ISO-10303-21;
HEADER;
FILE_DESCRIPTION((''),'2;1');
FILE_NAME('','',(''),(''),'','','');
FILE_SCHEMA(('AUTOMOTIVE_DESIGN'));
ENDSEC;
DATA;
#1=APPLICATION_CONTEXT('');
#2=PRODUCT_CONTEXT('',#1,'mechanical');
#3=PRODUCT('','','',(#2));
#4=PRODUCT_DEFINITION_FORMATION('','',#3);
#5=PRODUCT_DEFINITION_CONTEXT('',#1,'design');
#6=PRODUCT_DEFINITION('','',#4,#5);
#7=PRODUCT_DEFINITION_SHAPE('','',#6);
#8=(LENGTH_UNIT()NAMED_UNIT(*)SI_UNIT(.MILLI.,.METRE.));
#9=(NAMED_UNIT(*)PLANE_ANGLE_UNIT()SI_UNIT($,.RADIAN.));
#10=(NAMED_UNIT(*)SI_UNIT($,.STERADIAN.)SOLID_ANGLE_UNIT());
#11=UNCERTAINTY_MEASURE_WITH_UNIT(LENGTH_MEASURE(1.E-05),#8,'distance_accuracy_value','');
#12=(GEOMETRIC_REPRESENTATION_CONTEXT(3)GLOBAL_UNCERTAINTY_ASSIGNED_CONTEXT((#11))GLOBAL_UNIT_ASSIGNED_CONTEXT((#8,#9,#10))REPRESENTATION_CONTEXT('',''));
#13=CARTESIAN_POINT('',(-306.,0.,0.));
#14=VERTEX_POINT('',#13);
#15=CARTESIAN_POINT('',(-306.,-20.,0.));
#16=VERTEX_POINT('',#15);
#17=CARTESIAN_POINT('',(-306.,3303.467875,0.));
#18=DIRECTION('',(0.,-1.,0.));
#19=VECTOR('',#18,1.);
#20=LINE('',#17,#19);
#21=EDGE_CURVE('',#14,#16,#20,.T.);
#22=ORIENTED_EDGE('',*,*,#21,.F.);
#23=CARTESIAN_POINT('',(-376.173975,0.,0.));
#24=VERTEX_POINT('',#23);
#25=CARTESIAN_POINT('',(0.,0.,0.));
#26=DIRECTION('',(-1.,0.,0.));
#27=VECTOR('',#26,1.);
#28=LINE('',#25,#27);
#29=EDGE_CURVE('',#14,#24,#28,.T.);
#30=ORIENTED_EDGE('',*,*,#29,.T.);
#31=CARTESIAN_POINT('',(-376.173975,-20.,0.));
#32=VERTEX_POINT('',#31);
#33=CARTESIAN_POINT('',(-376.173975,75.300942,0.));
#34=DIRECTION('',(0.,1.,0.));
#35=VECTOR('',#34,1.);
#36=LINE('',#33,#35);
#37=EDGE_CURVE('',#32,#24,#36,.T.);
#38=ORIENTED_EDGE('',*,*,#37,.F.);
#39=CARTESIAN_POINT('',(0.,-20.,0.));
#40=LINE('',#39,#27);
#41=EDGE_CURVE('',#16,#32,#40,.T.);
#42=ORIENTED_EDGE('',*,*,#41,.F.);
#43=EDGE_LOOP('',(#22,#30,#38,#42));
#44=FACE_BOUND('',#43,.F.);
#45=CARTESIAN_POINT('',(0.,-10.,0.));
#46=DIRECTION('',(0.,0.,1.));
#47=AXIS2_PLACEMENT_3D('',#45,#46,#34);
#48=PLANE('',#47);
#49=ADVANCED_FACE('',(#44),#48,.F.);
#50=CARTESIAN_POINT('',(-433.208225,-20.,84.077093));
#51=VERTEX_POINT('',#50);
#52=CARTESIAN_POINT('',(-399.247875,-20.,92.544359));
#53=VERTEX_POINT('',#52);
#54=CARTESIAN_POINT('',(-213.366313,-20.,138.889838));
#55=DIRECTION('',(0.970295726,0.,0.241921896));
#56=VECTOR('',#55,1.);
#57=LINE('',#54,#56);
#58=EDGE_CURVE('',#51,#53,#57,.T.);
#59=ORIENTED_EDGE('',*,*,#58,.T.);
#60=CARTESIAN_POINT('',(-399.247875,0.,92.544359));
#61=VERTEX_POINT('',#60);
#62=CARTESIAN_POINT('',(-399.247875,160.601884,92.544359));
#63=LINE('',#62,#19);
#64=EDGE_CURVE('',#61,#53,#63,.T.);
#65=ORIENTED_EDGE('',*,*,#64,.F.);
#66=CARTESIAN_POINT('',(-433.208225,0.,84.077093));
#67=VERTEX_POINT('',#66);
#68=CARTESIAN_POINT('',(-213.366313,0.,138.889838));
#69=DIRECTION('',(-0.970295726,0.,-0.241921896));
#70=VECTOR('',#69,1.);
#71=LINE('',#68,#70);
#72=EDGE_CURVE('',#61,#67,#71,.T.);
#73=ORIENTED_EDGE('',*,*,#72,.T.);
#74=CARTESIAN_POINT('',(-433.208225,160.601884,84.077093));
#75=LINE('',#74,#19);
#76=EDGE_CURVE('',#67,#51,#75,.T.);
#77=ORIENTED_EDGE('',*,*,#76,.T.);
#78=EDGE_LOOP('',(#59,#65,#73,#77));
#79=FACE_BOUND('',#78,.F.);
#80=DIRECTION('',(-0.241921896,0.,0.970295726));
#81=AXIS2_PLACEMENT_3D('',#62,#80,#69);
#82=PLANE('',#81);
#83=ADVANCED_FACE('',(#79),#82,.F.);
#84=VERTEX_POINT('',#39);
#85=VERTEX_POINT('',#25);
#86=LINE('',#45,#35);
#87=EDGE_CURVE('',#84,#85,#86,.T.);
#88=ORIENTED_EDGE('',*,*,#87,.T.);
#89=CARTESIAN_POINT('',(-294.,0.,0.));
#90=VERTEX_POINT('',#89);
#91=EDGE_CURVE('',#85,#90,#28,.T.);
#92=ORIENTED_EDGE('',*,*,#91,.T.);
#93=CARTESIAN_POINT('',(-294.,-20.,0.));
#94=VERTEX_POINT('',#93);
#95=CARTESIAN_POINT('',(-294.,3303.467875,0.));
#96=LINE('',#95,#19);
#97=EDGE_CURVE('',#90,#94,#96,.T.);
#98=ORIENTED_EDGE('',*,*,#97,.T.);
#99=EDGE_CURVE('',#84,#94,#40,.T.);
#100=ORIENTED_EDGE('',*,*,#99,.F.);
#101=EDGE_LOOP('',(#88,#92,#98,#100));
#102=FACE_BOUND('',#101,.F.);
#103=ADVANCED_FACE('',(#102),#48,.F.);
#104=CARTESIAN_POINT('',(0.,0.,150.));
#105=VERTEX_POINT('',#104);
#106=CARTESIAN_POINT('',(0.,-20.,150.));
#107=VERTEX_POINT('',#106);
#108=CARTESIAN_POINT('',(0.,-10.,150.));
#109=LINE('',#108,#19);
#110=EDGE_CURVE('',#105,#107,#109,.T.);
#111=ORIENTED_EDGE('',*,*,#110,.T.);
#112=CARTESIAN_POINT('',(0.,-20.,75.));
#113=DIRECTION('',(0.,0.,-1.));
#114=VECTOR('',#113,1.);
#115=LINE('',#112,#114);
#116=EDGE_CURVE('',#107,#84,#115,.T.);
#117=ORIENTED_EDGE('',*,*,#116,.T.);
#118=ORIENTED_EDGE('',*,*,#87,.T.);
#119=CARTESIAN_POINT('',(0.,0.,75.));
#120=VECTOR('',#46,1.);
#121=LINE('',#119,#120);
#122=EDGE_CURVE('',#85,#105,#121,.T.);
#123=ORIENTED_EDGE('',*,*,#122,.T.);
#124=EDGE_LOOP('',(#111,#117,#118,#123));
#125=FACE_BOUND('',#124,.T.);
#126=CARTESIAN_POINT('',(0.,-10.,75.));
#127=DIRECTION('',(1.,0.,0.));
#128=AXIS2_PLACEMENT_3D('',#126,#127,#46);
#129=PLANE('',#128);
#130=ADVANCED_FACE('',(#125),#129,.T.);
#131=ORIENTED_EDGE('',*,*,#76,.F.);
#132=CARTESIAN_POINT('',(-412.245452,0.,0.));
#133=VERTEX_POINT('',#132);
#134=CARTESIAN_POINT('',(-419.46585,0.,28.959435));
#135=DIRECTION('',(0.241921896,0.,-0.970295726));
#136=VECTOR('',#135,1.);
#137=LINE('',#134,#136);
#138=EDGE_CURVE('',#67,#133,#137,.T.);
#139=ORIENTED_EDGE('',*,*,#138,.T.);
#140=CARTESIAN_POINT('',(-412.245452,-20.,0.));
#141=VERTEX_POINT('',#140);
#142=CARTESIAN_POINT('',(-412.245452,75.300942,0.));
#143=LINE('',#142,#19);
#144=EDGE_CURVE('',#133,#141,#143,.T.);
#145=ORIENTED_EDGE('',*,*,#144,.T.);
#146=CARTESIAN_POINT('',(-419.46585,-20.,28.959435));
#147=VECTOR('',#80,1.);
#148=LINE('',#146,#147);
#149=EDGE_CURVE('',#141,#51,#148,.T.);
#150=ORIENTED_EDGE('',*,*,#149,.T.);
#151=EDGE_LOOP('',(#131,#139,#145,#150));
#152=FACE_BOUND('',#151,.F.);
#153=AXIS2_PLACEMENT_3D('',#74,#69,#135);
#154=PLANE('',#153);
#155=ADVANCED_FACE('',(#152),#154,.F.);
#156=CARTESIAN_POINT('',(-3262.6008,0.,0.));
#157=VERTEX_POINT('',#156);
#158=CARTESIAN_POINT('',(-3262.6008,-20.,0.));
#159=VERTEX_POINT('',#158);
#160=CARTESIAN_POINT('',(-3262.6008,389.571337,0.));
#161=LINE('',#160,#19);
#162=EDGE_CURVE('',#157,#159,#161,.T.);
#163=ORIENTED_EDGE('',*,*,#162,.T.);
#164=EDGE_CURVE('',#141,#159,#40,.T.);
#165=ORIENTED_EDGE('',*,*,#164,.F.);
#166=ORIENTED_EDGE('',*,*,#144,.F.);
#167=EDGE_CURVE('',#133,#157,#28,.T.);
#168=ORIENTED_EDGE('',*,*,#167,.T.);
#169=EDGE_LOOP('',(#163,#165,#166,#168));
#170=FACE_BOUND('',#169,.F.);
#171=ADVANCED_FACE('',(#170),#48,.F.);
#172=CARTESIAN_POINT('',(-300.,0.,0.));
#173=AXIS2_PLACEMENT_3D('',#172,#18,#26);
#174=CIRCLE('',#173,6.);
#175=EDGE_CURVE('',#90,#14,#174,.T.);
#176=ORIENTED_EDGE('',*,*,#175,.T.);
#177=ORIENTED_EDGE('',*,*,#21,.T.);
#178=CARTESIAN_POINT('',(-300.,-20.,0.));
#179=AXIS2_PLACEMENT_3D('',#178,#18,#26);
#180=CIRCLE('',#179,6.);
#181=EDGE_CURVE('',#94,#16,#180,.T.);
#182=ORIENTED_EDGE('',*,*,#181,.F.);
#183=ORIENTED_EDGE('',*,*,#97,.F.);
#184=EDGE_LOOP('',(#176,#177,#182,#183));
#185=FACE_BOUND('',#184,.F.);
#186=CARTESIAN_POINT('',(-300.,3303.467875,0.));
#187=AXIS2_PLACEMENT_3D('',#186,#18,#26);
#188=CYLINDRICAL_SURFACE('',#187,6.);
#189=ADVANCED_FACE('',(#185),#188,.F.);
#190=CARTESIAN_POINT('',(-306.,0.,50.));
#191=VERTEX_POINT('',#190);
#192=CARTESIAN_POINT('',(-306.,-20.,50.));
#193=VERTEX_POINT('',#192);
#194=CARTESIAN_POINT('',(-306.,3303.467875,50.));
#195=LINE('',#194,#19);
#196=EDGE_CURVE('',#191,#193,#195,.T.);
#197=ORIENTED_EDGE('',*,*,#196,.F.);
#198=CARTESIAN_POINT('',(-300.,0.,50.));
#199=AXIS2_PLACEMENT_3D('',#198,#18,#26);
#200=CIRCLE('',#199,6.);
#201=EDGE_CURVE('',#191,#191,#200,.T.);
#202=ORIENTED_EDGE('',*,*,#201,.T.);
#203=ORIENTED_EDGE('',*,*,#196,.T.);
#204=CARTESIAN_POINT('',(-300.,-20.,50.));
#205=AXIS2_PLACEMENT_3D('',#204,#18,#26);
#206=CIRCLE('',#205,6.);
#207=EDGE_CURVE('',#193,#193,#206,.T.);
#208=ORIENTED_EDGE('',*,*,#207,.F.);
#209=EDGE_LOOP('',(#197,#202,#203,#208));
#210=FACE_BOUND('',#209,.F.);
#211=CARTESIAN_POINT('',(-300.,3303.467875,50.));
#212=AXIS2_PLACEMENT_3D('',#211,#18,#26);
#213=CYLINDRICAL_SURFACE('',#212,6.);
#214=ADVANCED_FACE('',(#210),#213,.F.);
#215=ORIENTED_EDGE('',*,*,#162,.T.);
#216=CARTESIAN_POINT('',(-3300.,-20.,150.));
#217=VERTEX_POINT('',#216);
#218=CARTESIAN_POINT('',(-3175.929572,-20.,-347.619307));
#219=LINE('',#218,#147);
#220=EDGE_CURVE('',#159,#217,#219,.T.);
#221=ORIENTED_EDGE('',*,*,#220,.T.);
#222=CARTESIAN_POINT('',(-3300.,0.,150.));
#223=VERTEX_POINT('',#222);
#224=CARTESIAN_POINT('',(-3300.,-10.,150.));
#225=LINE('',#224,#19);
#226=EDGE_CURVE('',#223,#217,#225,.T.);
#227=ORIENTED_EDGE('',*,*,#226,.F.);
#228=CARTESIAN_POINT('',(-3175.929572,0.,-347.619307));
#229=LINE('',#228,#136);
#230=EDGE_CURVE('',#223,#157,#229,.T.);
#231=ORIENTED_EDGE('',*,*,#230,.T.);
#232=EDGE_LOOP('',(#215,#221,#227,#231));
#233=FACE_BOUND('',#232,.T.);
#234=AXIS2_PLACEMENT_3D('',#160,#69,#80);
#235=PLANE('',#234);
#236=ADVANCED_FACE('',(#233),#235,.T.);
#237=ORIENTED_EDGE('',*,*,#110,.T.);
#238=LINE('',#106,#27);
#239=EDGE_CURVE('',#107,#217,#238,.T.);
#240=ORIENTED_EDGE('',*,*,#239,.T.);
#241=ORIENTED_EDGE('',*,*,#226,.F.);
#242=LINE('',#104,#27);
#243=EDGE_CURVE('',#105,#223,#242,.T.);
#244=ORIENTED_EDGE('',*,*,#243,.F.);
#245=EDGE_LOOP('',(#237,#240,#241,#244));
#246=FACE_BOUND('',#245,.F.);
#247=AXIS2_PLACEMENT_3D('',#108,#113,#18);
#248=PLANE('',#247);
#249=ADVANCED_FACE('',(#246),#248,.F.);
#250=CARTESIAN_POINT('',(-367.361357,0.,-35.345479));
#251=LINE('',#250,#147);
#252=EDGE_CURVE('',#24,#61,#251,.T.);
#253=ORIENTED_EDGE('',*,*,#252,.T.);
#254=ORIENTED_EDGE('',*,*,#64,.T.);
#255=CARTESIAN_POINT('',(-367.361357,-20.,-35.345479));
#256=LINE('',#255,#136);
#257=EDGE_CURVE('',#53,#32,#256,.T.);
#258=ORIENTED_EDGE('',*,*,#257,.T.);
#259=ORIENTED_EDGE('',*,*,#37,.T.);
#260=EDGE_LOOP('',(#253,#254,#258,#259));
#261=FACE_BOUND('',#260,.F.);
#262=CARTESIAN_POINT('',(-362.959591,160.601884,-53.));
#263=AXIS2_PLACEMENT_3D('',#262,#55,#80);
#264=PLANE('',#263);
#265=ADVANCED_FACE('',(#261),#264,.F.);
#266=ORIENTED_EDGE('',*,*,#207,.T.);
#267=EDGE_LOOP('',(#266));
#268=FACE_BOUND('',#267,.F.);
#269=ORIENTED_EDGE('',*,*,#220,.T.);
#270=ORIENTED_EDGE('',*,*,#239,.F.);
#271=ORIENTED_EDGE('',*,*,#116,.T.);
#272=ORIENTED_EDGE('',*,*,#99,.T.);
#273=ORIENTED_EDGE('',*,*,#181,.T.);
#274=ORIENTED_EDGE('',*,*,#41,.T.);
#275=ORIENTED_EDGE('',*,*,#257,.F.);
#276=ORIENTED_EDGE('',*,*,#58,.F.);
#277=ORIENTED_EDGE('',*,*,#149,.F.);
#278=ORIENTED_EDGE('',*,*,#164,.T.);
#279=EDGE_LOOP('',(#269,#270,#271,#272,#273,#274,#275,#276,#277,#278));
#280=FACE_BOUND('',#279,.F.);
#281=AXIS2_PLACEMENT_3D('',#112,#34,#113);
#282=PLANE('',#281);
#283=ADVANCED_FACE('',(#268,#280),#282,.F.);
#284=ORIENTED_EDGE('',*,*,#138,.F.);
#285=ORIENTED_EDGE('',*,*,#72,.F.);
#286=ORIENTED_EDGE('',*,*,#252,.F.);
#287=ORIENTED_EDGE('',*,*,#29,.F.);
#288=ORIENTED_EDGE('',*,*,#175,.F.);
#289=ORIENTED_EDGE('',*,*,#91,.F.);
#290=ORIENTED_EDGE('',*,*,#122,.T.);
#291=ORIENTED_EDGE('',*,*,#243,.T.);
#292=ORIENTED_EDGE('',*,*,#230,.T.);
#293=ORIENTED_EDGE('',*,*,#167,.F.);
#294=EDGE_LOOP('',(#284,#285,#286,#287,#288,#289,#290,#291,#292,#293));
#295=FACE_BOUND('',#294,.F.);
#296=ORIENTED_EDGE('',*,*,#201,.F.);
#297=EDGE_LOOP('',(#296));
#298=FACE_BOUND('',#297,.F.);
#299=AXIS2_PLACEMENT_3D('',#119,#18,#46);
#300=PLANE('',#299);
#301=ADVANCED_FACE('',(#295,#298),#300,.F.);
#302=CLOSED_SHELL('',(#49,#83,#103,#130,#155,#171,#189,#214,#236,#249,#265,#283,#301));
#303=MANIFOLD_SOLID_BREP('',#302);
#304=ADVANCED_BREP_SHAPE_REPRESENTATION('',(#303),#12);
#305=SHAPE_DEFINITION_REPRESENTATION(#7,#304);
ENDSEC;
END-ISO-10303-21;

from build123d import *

# Parameters (mm, degrees)
F0_W        = 20
F0_H        = 150
F3_T1_DEPTH = 799.1426747922
F11_D       = 12


# Not quite as in the source:
# - a fillet or chamfer that OpenCascade refuses, or shapes differently, is made with other operations: its cross-section is extruded or revolved along the edge and cut away or added
# - a feature of the source that left no trace in its solid (it failed there, or was rolled back) is left out


with BuildPart() as f2:
    # F2: sweep along a path in F1
    with BuildLine(Plane.XZ) as f2_path:
        Line((0, 0), (-3300, 0))
    # F0 (on Right) → F2 (sweep)
    with BuildSketch(Plane.YZ):
        with Locations((-10, 75)):
            Rectangle(F0_W, F0_H)
    sweep(path=f2_path.line)

    # F3: chamfer of 150 x 37.3992004265 on 1 edges, made by hand

    # F3_s2 → F3_t1 (cut)
    with BuildSketch(Plane.XZ.offset(-389.5713373961)):
        Polygon((-3262.6007995735, 0), (-3300, 150), (-3300, 0), align=None)
    extrude(amount=F3_T1_DEPTH, mode=Mode.SUBTRACT)

    # F9: sweep along a path in F8
    with BuildLine(Plane.XY) as f9_path:
        Line((-375.5503296852, 160.6018841267), (-375.5503296852, -268.9945995808))
    # F7 (on Front) → F9 (sweep, cut)
    with BuildSketch(Plane.XZ):
        Polygon((-399.247874902, 92.5443589414), (-433.2082253216, 84.0770925954), (-352.1368366165, -241.0824874784), (-362.959590562, -53), align=None)
    sweep(path=f9_path.line, mode=Mode.SUBTRACT)

    # F11 (through all)
    with Locations(Plane(origin=(0, 0, 0), x_dir=(1, 0, 0), z_dir=(0, 1, 0))):
        with Locations((-300, -50), (-300, 0)):
            Hole(F11_D / 2)


solid = f2.part
